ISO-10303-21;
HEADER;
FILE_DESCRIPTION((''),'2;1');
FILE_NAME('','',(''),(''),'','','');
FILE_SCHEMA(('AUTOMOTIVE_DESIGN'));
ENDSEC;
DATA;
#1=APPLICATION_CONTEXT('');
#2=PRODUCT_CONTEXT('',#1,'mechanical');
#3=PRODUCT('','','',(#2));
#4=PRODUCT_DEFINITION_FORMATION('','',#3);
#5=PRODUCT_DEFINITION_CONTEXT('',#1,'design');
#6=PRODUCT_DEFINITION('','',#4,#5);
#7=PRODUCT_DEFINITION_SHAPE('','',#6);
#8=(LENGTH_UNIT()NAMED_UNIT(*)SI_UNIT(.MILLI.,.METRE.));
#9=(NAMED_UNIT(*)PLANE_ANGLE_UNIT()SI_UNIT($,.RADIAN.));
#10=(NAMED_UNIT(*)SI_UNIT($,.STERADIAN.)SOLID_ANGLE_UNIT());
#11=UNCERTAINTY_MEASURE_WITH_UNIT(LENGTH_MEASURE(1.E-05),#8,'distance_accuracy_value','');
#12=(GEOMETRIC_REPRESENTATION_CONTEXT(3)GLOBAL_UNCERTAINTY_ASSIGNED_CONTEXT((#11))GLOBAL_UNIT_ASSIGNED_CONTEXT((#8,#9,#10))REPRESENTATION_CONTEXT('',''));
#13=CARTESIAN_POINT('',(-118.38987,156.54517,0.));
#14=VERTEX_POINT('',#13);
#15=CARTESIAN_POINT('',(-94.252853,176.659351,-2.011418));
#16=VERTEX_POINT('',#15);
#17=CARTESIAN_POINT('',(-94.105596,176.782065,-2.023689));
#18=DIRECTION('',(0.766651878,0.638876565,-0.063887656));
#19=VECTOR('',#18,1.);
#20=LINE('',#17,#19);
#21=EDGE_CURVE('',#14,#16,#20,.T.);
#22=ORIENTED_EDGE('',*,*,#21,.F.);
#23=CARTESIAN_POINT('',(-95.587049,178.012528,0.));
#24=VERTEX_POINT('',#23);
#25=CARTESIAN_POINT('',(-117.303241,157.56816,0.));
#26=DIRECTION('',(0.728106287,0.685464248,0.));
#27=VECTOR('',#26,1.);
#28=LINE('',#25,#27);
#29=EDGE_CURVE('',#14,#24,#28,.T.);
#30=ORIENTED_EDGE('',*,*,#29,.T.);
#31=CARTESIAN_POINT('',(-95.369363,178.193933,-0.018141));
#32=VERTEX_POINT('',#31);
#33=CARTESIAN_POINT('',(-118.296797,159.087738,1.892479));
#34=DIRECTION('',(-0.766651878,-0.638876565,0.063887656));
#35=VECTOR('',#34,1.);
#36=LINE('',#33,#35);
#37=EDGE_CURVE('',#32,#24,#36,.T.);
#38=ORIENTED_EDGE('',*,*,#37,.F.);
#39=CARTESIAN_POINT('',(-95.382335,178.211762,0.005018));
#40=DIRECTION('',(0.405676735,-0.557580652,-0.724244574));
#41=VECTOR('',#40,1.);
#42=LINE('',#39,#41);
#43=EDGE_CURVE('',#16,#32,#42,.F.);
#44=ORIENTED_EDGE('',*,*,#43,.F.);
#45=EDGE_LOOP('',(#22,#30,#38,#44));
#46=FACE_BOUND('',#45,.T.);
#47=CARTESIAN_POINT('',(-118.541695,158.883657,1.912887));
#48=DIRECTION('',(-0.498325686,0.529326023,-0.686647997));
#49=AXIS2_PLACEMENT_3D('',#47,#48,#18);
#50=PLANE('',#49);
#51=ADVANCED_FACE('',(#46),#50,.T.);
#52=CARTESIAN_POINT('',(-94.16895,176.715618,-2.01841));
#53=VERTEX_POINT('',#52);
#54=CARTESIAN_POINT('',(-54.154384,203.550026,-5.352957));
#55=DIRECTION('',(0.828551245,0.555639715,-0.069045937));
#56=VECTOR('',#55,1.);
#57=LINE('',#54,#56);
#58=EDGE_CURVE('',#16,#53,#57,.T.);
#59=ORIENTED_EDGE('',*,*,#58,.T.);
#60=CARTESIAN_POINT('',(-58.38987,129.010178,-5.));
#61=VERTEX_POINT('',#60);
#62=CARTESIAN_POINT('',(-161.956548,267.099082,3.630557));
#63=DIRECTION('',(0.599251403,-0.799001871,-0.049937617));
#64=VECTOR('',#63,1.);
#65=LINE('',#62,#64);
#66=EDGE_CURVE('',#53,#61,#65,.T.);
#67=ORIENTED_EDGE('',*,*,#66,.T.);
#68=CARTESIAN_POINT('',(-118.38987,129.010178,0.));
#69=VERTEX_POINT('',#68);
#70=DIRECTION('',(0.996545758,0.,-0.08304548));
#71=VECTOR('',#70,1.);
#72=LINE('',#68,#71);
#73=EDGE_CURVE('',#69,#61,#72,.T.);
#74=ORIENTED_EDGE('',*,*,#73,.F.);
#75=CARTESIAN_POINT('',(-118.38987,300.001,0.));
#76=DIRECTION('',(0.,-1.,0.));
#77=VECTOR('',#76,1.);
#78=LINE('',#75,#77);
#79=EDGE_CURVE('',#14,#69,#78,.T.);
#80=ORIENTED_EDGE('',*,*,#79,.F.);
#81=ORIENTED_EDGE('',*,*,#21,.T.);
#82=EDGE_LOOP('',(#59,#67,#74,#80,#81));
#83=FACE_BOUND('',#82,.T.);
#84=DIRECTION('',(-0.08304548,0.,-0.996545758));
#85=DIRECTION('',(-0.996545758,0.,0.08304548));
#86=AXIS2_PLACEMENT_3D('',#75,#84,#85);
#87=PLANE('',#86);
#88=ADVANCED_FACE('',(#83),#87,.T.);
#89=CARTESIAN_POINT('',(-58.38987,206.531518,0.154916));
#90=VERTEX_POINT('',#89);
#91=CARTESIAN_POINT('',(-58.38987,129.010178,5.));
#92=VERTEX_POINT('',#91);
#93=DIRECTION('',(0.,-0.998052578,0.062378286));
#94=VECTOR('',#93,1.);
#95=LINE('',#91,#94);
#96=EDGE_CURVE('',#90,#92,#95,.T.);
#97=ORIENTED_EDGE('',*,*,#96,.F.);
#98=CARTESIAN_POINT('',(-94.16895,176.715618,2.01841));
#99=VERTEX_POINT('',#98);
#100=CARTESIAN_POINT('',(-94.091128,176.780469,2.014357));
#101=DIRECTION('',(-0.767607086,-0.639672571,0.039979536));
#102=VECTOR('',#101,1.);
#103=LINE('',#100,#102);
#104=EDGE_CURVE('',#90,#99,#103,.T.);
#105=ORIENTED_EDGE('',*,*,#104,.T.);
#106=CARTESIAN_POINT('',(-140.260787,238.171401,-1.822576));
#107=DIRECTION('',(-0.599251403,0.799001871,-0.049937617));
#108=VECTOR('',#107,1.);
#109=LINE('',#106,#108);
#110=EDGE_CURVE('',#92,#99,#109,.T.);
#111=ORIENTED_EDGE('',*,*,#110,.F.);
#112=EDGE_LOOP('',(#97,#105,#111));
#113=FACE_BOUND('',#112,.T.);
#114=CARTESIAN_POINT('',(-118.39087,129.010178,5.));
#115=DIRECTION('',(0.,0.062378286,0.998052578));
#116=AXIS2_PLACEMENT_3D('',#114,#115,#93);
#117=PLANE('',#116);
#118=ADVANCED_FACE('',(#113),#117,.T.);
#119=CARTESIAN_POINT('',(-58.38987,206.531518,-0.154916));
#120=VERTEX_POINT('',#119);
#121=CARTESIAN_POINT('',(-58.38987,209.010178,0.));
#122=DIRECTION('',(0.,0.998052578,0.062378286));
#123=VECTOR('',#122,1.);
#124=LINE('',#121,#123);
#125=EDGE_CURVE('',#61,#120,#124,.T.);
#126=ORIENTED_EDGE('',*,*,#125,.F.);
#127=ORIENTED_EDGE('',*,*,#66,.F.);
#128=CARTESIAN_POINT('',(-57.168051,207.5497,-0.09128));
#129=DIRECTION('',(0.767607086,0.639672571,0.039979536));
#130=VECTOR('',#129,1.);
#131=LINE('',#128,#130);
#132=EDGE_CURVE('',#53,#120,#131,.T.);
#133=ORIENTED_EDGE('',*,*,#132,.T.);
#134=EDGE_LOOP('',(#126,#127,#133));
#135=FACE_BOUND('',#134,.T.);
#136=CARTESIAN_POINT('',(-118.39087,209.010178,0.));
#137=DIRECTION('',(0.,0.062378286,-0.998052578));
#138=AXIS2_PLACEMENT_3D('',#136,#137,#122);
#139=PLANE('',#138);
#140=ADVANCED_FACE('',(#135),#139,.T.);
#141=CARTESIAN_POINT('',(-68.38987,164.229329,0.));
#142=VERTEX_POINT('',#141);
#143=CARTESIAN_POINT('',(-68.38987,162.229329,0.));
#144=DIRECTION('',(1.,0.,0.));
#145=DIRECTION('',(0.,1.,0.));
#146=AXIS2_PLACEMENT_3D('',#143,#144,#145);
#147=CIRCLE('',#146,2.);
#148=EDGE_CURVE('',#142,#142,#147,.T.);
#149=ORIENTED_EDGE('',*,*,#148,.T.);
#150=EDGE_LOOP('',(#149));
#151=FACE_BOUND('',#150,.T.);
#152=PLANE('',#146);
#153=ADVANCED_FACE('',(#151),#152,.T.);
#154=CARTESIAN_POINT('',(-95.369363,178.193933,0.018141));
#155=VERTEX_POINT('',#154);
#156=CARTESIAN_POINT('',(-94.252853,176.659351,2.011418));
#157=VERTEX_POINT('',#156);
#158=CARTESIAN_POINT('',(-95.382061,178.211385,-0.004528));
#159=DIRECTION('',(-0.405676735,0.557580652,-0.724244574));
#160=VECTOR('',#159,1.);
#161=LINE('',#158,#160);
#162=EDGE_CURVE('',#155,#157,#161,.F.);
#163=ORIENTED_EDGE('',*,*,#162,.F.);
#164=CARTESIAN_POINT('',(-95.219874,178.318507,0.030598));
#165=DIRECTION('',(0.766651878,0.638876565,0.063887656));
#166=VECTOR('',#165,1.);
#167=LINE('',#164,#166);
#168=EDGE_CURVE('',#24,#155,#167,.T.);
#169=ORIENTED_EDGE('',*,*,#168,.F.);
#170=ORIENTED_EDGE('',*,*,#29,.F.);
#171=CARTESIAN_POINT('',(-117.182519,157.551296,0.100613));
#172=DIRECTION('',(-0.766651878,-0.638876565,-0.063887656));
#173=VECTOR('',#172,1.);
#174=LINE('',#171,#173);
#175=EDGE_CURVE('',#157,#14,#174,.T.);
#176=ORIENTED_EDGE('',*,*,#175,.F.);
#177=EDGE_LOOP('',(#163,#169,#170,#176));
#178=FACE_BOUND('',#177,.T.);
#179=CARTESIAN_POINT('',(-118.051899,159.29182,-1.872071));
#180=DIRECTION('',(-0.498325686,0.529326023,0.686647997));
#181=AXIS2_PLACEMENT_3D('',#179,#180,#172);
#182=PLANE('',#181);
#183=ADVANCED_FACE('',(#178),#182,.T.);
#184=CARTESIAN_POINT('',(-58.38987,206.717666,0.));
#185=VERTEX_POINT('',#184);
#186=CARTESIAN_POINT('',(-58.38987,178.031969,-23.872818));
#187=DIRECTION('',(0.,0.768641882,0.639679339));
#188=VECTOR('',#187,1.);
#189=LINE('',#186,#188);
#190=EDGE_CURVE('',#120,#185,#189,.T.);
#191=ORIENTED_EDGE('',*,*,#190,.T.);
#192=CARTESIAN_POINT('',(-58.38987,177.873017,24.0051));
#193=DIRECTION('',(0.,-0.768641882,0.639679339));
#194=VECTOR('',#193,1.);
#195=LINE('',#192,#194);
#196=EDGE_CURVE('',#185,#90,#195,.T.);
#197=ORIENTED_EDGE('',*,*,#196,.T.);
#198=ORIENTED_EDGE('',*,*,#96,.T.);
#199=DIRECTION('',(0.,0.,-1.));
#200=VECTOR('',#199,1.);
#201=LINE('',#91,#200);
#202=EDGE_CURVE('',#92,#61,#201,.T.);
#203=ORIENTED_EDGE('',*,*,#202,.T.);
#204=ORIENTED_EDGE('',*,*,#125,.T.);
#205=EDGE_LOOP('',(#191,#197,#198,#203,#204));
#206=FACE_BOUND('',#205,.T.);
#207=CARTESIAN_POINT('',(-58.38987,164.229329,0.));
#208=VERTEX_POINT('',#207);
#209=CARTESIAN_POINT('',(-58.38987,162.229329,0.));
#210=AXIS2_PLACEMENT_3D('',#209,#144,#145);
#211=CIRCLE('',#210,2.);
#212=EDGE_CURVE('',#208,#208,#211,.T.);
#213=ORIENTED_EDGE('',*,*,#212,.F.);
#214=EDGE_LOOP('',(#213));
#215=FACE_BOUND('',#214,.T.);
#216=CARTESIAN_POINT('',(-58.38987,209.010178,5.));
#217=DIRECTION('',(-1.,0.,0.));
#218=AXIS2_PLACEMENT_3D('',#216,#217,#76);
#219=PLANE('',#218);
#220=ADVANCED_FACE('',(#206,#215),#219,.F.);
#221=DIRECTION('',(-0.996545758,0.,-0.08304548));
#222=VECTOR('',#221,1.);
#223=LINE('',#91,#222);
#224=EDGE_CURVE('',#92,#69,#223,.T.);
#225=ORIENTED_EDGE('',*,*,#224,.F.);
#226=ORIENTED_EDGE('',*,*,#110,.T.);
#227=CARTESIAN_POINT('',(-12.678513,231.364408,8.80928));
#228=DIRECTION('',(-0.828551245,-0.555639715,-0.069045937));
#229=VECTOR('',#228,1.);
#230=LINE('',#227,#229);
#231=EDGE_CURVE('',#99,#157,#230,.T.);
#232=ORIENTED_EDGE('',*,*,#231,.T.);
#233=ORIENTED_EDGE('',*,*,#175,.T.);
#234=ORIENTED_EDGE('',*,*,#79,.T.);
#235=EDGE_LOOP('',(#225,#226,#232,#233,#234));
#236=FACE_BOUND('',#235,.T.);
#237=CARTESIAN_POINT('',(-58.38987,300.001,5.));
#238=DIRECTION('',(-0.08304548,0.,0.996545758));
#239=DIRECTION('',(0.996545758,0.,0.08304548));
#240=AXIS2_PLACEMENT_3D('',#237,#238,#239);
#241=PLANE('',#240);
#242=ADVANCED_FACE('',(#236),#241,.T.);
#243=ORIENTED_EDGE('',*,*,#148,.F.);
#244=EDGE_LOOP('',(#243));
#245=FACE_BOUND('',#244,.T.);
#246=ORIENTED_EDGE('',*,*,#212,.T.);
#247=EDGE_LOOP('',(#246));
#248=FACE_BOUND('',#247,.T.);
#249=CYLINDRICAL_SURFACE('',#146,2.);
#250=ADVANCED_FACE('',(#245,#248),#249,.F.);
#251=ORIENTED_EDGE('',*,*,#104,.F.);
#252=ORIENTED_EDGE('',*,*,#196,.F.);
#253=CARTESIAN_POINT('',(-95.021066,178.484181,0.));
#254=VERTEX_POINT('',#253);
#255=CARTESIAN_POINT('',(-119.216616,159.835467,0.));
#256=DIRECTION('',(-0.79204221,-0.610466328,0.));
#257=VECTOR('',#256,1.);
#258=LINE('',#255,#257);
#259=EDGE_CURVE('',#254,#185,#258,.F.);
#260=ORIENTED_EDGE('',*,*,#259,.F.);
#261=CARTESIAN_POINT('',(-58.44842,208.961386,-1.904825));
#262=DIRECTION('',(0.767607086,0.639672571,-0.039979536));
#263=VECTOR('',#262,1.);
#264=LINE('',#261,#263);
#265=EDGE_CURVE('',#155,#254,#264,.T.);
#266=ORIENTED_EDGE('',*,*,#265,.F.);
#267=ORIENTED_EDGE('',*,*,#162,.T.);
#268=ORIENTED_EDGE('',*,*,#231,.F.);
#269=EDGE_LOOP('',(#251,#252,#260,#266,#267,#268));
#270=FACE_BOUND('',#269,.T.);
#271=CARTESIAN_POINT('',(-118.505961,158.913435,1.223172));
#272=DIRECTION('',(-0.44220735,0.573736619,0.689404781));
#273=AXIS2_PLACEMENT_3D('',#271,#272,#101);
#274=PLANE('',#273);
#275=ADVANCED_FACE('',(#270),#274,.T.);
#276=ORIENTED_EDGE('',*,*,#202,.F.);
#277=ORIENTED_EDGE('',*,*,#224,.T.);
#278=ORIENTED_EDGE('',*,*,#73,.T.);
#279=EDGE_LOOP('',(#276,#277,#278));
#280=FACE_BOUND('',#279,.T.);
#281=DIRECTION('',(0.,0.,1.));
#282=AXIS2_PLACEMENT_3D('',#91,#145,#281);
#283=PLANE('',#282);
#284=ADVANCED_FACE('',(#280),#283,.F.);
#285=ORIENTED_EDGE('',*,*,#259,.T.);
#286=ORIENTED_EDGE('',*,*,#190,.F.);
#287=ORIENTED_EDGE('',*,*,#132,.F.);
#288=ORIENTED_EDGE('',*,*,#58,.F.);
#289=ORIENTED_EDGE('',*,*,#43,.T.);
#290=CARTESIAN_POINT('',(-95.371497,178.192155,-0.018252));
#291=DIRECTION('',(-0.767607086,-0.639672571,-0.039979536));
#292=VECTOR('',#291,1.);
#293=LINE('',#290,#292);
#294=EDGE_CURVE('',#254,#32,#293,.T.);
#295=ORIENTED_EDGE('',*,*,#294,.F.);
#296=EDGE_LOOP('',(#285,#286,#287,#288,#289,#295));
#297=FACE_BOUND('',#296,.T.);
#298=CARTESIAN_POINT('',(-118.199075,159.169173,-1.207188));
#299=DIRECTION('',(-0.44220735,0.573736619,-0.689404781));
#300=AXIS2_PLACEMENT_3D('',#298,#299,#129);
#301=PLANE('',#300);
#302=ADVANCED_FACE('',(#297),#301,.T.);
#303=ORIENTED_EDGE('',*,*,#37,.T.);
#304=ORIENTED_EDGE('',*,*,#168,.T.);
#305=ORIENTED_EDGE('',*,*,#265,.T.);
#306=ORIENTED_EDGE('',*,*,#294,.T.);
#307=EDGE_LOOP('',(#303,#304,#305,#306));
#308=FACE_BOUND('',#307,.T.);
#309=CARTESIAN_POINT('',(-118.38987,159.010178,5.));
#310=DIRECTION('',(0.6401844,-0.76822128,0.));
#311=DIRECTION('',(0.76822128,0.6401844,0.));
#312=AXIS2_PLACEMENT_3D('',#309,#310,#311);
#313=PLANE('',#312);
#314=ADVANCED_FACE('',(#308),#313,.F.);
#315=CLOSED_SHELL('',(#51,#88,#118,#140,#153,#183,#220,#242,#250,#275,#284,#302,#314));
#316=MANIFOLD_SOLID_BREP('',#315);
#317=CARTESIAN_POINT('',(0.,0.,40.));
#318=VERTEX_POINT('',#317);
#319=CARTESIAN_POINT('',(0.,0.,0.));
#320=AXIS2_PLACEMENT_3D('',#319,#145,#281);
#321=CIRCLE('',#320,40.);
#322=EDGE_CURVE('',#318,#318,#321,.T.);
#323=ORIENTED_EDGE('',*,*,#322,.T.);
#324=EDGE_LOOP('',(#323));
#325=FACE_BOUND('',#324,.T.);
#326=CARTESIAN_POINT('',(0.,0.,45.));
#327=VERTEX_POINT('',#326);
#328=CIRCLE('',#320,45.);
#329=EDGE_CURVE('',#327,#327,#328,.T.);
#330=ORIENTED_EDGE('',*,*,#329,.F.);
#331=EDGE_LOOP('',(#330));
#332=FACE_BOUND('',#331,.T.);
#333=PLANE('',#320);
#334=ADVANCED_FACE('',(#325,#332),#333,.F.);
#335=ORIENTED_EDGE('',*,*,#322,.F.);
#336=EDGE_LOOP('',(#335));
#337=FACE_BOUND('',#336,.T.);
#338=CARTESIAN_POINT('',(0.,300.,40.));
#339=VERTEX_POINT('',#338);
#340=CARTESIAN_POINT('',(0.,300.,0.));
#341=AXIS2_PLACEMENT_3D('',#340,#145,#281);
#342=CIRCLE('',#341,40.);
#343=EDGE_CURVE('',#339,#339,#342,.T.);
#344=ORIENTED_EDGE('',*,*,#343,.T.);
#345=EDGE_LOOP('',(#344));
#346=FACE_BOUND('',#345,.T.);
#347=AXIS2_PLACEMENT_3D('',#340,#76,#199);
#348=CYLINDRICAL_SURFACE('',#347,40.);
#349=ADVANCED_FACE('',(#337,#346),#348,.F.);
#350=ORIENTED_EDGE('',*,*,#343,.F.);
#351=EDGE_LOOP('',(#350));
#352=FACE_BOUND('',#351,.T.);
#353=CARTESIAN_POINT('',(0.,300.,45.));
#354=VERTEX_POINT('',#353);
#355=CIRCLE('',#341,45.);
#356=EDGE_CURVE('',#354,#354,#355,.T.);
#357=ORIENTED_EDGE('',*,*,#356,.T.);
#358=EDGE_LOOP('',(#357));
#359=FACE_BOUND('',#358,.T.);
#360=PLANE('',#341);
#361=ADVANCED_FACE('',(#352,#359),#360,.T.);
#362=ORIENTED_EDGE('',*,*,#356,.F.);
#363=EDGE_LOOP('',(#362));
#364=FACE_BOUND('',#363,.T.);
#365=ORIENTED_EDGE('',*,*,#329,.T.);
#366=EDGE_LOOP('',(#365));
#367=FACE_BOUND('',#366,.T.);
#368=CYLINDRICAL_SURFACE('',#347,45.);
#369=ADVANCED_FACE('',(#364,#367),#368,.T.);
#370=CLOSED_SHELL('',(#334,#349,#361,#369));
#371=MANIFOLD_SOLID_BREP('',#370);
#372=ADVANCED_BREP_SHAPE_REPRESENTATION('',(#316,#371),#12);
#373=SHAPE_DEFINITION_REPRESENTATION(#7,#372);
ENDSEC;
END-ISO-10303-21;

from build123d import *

# Parameters (mm, degrees)
SKETCH5_R           = 45
SKETCH5_R_2         = 40
BOSS_EXTRUDE6_DEPTH = 300
BOSS_EXTRUDE7_DEPTH = 5
SKETCH7_OUTSIDE_W   = 162.654
SKETCH7_OUTSIDE_H   = 372.654
CUT_EXTRUDE2_DEPTH  = 60
SKETCH8_OUTSIDE_W   = 236.044
SKETCH8_OUTSIDE_H   = 162.654
CUT_EXTRUDE4_DEPTH  = 63.333333
SKETCH9_R           = 2
CUT_EXTRUDE5_DEPTH  = 10


with BuildPart() as part:
    # Sketch5 → Boss-Extrude6 (new body)
    with BuildSketch(Plane(origin=(0, 0, 0), x_dir=(1, 0, 0), z_dir=(0, 1, 0))):
        with Locations(Location((0, 0, 0), (0, 0, 270))):
            Circle(SKETCH5_R)
        with Locations(Location((0, 0, 0), (0, 0, 270))):
            Circle(SKETCH5_R_2, mode=Mode.SUBTRACT)
    extrude(amount=BOSS_EXTRUDE6_DEPTH)


with BuildPart() as body_2:
    # Sketch6 → Boss-Extrude7 (new, symmetric)
    with BuildSketch(Plane.XY):
        Polygon((-58.389869674, 209.010177568), (-58.389869674, 129.010177568), (-118.389869674, 129.010177568), (-118.389869674, 159.010177568), align=None)
    extrude(amount=BOSS_EXTRUDE7_DEPTH, both=True)

    # Sketch7 outside → Cut-Extrude2 (cut)
    with BuildSketch(Plane(origin=(-58.389869674, 0, 0), x_dir=(0, 0, -1), z_dir=(1, 0, 0))):
        with Locations((0, 150)):
            Rectangle(SKETCH7_OUTSIDE_W, SKETCH7_OUTSIDE_H)
        Polygon((-5, 129.010177568), (0, 209.010177568), (5, 129.010177568), align=None, mode=Mode.SUBTRACT)
    extrude(amount=-CUT_EXTRUDE2_DEPTH, mode=Mode.SUBTRACT)

    # Sketch8 outside → Cut-Extrude4 (cut)
    with BuildSketch(Plane.XZ.offset(-129.010177568)):
        with Locations((-36.695, 0)):
            Rectangle(SKETCH8_OUTSIDE_W, SKETCH8_OUTSIDE_H)
        Polygon((-58.389869674, 5), (-118.389869674, 0), (-58.389869674, -5), align=None, mode=Mode.SUBTRACT)
    extrude(amount=-CUT_EXTRUDE4_DEPTH, mode=Mode.SUBTRACT)

    # Chamfer1
    # the kernel refuses this chamfer: 2 mm, written as the material it takes off along each edge
    with BuildSketch(Plane(origin=(-54.61893677, 212.152621655, 0.196402755), x_dir=(0.6406678172597216, -0.7640577696348805, -0.07589777722855967), z_dir=(-0.7676070857324205, -0.6396725714436841, -0.03997953571523024))) as chamfer1_piece_1:
        with BuildLine():
            Line((1.965032879, 0), (-0.204239114, 1.954390084))
            Line((-0.204239114, 1.954390084), (-0.244123554, 1.951351743))
            ThreePointArc((-0.244123554, 1.951351743), (-0.114485472, 0.976253024), (-0.039884439, -0.00303834))
            Line((-0.039884439, -0.00303834), (0.001123574, -0.039984217))
            ThreePointArc((0.001123574, -0.039984217), (0.982864796, -0.01239685), (1.966156453, -0.039984217))
            Line((1.966156453, -0.039984217), (1.965032879, 0))
        make_face()
    extrude(amount=57.926696558, mode=Mode.SUBTRACT)
    with BuildSketch(Plane(origin=(-99.083879501, 175.098502712, 2.119479678), x_dir=(-0.04868338001269826, -0.004005333382546194, -0.9988062303645456), z_dir=(0.7676070857324205, 0.6396725714436841, -0.03997953571523024))) as chamfer1_piece_2:
        with BuildLine():
            Line((1.965032879, 0), (-0.204239114, -1.954390084))
            Line((-0.204239114, -1.954390084), (-0.244123554, -1.951351743))
            ThreePointArc((-0.244123554, -1.951351743), (-0.114485472, -0.976253024), (-0.039884439, 0.00303834))
            Line((-0.039884439, 0.00303834), (0.001123574, 0.039984217))
            ThreePointArc((0.001123574, 0.039984217), (0.982864796, 0.01239685), (1.966156453, 0.039984217))
            Line((1.966156453, 0.039984217), (1.965032879, 0))
        make_face()
    extrude(amount=57.926696558, mode=Mode.SUBTRACT)
    with BuildSketch(Plane(origin=(-122.137227268, 155.887379573, 0.3122798), x_dir=(0.6340793876319524, -0.7690043228353277, -0.08109057676985179), z_dir=(0.7666518779999277, 0.63887656499994, -0.06388765649999398)), Plane(origin=(-91.565589003, 181.363744794, 2.235356723), x_dir=(0.6340793876319524, -0.7690043228353278, 0.0810905767698521), z_dir=(-0.7666518779999277, -0.63887656499994, -0.06388765649999398))) as chamfer1_piece_3:
        with BuildLine():
            Line((1.955180807, 0), (-0.213670596, -1.943470315))
            Line((-0.213670596, -1.943470315), (-0.253538324, -1.940220052))
            ThreePointArc((-0.253538324, -1.940220052), (-0.119271891, -0.97072125), (-0.039867729, 0.003250263))
            Line((-0.039867729, 0.003250263), (0.001126122, 0.039984145))
            ThreePointArc((0.001126122, 0.039984145), (0.977941693, 0.012472909), (1.956306929, 0.039984145))
            Line((1.956306929, 0.039984145), (1.955180807, 0))
        make_face()
    extrude(amount=39.876819118, mode=Mode.SUBTRACT)

    # Sketch9 → Cut-Extrude5 (cut)
    with BuildSketch(Plane(origin=(-58.389869674, 0, 0), x_dir=(0, 0, -1), z_dir=(1, 0, 0))):
        with Locations(Location((0, 162.229328702, 0), (0, 0, 90))):
            Circle(SKETCH9_R)
    extrude(amount=-CUT_EXTRUDE5_DEPTH, mode=Mode.SUBTRACT)


solid = Compound([part.part, body_2.part])
